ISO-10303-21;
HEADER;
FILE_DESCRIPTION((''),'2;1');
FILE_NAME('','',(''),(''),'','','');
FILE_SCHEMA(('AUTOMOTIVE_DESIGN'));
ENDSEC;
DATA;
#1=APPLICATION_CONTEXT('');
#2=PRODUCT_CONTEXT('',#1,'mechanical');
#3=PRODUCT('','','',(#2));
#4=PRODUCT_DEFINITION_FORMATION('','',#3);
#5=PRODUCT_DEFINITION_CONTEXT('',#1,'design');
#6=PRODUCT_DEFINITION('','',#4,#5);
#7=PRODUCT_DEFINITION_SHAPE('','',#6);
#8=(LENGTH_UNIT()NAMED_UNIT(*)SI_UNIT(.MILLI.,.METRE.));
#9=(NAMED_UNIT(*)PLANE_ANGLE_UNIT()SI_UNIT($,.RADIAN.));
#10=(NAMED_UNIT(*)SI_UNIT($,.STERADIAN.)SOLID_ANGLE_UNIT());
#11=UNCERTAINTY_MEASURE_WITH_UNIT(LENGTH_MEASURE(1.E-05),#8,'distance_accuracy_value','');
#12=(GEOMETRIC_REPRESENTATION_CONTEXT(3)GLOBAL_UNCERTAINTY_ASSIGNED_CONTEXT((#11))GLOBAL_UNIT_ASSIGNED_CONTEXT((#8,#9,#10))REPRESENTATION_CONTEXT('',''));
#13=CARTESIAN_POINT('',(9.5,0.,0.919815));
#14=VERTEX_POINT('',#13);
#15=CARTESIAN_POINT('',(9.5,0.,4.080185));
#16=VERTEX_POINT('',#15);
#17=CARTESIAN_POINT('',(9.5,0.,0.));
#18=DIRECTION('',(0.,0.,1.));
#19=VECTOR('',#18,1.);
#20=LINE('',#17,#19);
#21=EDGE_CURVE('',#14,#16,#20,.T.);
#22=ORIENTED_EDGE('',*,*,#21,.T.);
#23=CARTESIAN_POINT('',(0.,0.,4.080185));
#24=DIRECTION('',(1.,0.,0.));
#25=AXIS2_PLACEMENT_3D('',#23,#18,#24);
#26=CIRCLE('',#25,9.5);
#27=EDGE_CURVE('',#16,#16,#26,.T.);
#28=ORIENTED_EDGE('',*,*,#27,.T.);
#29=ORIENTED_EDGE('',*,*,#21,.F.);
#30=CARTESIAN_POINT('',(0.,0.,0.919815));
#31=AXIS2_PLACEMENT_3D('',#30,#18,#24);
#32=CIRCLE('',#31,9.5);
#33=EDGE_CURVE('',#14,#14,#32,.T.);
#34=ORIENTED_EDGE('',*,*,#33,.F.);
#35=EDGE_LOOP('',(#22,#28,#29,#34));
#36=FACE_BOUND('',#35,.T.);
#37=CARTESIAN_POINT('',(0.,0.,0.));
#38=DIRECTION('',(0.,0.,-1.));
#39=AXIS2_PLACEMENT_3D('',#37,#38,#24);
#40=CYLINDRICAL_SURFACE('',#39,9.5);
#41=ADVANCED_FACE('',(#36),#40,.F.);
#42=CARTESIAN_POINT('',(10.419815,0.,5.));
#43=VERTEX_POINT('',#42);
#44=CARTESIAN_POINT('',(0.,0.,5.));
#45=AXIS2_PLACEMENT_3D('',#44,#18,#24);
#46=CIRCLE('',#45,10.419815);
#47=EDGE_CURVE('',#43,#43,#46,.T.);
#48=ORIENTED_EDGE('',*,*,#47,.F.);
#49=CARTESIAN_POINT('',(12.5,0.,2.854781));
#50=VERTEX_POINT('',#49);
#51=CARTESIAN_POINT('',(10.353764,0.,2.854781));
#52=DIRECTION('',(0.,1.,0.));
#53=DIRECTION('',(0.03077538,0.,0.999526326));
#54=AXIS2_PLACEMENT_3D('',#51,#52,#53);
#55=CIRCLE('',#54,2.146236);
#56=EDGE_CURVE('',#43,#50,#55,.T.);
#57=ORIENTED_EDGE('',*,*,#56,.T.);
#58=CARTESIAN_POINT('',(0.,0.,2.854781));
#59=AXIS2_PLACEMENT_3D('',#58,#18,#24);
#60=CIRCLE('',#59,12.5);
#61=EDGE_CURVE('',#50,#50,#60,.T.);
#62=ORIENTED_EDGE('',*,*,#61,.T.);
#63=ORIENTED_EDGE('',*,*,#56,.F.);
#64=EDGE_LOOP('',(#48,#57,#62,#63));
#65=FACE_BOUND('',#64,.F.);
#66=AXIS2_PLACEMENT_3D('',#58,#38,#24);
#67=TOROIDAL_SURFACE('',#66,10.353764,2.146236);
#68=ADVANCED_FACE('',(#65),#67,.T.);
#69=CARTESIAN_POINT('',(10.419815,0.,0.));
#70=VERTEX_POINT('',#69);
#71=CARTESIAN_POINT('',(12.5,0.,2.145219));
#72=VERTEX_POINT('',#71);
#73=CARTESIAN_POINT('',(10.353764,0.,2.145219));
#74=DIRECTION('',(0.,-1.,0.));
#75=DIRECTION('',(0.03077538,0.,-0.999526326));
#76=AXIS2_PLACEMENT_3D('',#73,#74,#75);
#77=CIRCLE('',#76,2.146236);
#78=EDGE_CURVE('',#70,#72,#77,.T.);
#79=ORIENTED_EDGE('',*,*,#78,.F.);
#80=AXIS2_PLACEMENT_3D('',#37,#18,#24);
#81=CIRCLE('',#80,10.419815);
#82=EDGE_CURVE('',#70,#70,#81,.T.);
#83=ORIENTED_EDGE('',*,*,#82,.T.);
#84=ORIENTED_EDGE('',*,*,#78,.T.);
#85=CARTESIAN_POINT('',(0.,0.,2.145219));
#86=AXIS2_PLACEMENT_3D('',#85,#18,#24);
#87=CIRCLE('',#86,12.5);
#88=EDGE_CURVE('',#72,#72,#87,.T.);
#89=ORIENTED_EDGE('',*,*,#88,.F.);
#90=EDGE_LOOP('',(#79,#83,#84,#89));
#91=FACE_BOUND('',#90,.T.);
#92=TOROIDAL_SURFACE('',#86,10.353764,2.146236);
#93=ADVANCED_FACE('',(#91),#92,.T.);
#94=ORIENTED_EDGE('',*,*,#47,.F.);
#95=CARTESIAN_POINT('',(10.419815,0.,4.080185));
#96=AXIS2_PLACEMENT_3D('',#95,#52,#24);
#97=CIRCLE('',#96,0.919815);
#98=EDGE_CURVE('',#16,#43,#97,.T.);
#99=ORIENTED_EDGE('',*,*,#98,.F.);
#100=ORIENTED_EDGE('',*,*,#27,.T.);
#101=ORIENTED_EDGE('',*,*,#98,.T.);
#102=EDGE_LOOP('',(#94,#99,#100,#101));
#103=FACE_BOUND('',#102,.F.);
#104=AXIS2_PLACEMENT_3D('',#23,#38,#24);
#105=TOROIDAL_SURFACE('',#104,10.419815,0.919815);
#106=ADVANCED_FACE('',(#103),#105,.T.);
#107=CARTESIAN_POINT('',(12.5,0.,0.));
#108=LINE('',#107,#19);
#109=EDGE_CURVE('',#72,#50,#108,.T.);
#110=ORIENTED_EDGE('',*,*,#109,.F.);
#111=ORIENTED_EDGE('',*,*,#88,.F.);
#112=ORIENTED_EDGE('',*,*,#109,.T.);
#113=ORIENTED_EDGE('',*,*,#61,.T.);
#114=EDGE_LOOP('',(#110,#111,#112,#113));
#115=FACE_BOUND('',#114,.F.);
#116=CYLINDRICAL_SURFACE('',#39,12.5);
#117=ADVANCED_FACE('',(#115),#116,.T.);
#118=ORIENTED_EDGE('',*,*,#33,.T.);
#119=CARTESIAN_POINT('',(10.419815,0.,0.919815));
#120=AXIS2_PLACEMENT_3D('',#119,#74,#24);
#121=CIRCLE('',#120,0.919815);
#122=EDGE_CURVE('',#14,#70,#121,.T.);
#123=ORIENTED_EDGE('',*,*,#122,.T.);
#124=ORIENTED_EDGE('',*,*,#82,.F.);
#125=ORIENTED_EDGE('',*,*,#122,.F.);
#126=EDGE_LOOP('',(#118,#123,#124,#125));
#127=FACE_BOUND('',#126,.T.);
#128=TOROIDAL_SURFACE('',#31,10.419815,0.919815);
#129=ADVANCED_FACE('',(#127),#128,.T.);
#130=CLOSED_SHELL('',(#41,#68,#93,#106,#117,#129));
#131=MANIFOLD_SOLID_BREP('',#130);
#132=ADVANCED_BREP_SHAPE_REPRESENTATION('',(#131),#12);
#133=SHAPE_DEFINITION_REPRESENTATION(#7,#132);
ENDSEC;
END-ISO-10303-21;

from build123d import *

# Parameters (mm, degrees)
F0_R     = 12.5
F0_R_2   = 9.5
F1_DEPTH = 5
F2_R     = 0.9198153673


# Not quite as in the source:
# - a fillet or chamfer that OpenCascade refuses, or shapes differently, is made with other operations: its cross-section is extruded or revolved along the edge and cut away or added


with BuildPart() as f1:
    # F0 (on Top) → F1 (new body)
    with BuildSketch(Plane.XY):
        Circle(F0_R)
        Circle(F0_R_2, mode=Mode.SUBTRACT)
    extrude(amount=F1_DEPTH)

    # F2
    f2_edges = [f1.edges().sort_by_distance(p)[0] for p in [
        (-9.5, 0, 5),
        (-9.5, 0, 0),
    ]]
    fillet(f2_edges, radius=F2_R)

    # F3: fillet of radius 2.1462358569 on 2 edges, made by hand

    # F3_s1 → F3_t2 (revolve, cut)
    with BuildSketch(Plane.XZ):
        with BuildLine():
            ThreePointArc((10.4198153673, 0), (11.8945577469, 0.6511364368), (12.5, 2.1452192404))
            Line((12.5, 2.1452192404), (12.5429247171, 2.1452192404))
            Line((12.5429247171, 2.1452192404), (12.5429247171, 0))
            Line((12.5429247171, 0), (12.5, -0.0429247171))
            ThreePointArc((12.5, -0.0429247171), (11.4599076836, -0.0429247171), (10.4211363917, -0.0429043848))
            Line((10.4211363917, -0.0429043848), (10.4198153673, 0))
        make_face()
    revolve(axis=Axis((0, 0, 0), (0, 0, 1)), mode=Mode.SUBTRACT)

    # F3_s3 → F3_t4 (revolve, cut)
    with BuildSketch(Plane.XZ):
        with BuildLine():
            ThreePointArc((10.4198153673, 5), (11.8945577469, 4.3488635632), (12.5, 2.8547807596))
            Line((12.5, 2.8547807596), (12.5429247171, 2.8547807596))
            Line((12.5429247171, 2.8547807596), (12.5429247171, 5))
            Line((12.5429247171, 5), (12.5, 5.0429247171))
            ThreePointArc((12.5, 5.0429247171), (11.4599076836, 5.0429247171), (10.4211363917, 5.0429043848))
            Line((10.4211363917, 5.0429043848), (10.4198153673, 5))
        make_face()
    revolve(axis=Axis((0, 0, 5), (0, 0, 1)), mode=Mode.SUBTRACT)


solid = f1.part
